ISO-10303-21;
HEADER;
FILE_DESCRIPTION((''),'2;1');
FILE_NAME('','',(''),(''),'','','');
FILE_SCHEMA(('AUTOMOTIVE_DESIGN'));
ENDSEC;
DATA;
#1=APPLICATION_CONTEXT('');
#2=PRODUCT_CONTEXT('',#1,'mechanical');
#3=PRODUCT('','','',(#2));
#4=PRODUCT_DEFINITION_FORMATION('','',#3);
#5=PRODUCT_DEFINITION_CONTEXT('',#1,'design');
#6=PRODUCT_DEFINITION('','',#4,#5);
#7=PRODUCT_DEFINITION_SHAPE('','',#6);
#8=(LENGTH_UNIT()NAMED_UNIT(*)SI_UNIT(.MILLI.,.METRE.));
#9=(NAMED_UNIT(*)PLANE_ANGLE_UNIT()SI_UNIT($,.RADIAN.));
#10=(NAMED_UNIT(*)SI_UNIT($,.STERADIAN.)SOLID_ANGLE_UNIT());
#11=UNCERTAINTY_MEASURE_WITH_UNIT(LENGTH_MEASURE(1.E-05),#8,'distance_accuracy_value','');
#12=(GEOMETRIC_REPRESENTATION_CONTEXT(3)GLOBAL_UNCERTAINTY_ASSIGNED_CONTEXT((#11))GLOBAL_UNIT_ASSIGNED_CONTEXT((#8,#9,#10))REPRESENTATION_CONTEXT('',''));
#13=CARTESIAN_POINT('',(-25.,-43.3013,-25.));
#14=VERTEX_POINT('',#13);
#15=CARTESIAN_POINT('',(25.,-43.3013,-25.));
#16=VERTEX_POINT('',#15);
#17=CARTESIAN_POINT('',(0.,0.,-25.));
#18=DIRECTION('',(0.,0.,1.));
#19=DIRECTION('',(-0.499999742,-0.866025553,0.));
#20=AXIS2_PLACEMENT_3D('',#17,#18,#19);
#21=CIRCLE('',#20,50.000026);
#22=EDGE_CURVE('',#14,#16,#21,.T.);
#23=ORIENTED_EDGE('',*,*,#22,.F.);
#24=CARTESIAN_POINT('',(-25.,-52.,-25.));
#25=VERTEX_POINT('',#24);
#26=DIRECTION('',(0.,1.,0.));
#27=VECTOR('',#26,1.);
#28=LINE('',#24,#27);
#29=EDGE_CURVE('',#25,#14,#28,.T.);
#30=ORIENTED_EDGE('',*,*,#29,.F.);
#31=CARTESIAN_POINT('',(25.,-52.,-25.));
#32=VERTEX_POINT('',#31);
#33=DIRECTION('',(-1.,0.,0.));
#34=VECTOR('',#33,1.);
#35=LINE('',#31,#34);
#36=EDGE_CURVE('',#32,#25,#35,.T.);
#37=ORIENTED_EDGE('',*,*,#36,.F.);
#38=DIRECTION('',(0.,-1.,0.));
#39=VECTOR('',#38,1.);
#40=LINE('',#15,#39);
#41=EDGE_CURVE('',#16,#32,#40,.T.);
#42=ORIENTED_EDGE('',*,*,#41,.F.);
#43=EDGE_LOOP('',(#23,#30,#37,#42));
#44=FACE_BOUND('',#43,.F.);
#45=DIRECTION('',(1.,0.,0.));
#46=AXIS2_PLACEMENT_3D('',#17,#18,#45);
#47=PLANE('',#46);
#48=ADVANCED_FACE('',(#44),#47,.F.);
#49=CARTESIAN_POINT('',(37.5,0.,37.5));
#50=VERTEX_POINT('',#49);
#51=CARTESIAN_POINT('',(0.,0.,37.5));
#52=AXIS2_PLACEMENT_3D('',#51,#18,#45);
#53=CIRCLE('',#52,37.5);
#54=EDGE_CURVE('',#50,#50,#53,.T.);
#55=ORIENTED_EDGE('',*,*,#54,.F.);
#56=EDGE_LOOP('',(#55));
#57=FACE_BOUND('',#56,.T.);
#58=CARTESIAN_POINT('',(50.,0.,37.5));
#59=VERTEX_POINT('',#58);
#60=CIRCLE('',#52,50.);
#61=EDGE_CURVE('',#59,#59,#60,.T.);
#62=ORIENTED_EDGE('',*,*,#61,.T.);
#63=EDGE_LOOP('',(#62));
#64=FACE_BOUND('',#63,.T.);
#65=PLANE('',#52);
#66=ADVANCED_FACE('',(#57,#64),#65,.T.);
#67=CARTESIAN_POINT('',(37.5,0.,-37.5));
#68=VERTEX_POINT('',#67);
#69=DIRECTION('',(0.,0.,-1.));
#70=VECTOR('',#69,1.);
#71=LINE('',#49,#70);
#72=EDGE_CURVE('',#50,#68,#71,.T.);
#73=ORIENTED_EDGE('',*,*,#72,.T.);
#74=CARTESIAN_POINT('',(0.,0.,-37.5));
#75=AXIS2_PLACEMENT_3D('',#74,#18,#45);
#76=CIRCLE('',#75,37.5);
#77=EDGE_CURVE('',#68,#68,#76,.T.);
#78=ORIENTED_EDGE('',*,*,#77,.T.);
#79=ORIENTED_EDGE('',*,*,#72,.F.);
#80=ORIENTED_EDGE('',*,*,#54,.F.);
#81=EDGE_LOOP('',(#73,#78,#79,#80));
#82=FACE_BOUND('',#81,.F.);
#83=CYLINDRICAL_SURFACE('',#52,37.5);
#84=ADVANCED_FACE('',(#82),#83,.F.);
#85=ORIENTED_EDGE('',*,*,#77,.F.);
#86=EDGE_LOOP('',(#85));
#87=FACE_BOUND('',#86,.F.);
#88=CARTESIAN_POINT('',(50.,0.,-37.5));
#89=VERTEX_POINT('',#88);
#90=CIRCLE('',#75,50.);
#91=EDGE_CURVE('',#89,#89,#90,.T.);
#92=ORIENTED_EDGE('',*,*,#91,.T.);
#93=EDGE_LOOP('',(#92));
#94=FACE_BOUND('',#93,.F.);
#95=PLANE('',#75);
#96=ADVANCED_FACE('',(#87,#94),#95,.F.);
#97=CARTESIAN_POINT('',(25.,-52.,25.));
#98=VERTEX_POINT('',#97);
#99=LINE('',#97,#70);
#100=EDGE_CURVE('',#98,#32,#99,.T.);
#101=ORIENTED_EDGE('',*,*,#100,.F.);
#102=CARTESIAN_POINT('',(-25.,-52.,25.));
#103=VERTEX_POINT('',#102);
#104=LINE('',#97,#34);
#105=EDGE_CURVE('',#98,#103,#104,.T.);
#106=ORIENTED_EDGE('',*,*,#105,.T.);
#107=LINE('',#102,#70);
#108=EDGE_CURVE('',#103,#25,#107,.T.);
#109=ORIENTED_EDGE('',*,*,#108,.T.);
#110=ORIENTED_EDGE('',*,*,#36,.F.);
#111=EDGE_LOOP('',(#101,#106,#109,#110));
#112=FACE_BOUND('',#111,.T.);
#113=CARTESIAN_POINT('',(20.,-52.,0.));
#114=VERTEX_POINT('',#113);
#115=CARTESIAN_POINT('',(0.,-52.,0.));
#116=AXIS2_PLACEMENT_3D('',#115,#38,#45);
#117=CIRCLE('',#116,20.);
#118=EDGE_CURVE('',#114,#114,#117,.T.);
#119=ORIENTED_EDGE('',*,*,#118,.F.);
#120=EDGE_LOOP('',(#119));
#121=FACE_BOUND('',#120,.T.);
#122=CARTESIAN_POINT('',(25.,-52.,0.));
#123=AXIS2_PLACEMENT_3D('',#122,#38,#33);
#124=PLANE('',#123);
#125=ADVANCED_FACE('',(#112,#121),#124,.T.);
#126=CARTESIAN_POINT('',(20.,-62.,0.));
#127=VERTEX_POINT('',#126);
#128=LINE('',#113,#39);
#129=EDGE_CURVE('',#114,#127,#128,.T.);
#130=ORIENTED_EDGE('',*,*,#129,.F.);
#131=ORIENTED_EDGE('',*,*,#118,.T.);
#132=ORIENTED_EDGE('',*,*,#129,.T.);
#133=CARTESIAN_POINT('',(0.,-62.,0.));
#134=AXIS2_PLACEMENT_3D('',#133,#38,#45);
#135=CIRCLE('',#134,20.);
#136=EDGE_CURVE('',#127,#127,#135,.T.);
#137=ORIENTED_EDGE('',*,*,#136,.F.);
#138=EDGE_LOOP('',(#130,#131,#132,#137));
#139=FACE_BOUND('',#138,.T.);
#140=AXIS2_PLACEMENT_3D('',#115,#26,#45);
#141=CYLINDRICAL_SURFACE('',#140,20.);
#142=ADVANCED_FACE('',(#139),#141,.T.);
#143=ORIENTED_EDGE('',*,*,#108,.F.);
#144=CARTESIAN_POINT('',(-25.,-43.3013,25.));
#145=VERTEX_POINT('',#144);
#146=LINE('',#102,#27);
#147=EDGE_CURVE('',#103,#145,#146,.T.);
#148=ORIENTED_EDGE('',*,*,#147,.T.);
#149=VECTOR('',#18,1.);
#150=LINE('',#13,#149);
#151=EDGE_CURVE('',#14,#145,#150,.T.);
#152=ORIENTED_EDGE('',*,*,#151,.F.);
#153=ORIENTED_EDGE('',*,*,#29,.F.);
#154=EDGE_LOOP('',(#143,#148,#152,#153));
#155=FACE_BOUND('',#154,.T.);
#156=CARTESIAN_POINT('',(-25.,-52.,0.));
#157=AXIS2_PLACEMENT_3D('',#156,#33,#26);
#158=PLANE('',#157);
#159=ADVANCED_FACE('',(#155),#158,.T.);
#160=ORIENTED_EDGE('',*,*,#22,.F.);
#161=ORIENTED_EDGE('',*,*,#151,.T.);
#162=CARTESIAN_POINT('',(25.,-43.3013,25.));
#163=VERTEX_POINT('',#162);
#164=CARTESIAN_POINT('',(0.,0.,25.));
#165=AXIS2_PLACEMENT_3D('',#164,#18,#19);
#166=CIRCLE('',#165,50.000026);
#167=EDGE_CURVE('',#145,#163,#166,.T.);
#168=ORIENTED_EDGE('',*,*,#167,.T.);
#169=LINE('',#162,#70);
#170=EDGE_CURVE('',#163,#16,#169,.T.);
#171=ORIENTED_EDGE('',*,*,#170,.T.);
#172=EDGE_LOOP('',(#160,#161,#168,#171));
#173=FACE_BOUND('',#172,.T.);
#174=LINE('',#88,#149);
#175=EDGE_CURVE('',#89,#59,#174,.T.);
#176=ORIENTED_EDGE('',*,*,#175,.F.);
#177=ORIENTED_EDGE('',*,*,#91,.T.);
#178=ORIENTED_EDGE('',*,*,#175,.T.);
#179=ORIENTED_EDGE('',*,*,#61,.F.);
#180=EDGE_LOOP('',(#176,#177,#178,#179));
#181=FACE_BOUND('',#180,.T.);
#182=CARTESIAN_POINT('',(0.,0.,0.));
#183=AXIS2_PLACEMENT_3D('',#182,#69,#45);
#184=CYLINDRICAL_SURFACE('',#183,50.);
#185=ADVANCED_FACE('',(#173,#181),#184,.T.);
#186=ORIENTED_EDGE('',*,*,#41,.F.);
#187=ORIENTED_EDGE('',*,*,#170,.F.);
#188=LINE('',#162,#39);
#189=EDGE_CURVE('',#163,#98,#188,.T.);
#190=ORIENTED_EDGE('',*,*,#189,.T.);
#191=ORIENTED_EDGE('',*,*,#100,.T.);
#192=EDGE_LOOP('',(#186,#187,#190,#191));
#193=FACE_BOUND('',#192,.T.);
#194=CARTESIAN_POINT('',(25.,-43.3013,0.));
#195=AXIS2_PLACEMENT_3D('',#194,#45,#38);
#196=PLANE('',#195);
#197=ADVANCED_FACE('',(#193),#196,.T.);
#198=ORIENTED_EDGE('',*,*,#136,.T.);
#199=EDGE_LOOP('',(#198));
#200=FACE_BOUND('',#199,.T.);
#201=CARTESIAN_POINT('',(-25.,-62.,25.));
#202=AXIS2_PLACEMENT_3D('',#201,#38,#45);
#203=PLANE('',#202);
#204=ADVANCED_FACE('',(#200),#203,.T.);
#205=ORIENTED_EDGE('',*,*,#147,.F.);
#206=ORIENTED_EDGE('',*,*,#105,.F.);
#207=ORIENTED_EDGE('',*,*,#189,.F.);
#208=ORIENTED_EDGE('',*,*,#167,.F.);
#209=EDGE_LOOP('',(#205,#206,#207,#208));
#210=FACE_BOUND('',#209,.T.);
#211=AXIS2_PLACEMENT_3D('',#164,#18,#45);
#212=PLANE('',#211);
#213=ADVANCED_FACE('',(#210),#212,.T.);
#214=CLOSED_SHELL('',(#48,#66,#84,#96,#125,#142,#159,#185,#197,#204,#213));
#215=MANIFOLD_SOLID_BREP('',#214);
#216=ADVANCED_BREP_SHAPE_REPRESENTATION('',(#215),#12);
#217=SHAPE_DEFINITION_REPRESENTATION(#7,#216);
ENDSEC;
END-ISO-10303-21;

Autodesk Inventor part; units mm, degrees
ref_plane "YZ Plane" through (0, 0, 0) normal (1, 0, 0) x (0, 1, 0)
ref_plane "XZ Plane" through (0, 0, 0) normal (0, 1, 0) x (-1, 0, 0)
ref_plane "XY Plane" through (0, 0, 0) normal (0, 0, 1) x (1, 0, 0)
sketch "Sketch1" plane through (0, 0, 0) normal (0, 0, 1) x (1, 0, 0)
  circle A0 centre (0, 0) radius 50
  dimension "d0" = 100
extrude "Extrusion1" add sketch "Sketch1" along normal mid plane 75
sketch "Sketch2" plane through (0, 0, 37.5) normal (0, 0, 1) x (1, 0, 0)
  circle A0 centre (0, 0) radius 37.5
  dimension "d3" = 75
extrude "Extrusion2" cut sketch "Sketch2" against normal through all
sketch "Sketch4" plane through (0, 0, 0) normal (0, 0, 1) x (1, 0, 0)
  line L0 (25, -43.3013) -> (25, -52)
  line L1 (25, -52) -> (-25, -52)
  line L2 (-25, -52) -> (-25, -43.3013)
  arc A0 (-25, -43.3013) -> (25, -43.3013) centre (0, 0) ccw
  circle A1 centre (0, 0) radius 50 projected
  line L3 (0, 0) -> (0, -66.2618) construction
  dimension "d22" = 50
  dimension "d24" = 90
  dimension "d25" = 50
  dimension "d26" = 52
extrude "Extrusion3" add sketch "Sketch4" along normal mid plane 50 contours L0 L1 L2 A0
sketch "Sketch6" plane through (-25, -52, 25) normal (0, -1, 0) x (1, 0, 0)
  circle A0 centre (25, -25) radius 20
  dimension "d27" = 40
extrude "Extrusion5" add sketch "Sketch6" along normal blind 10
properties material "ABS Plastic"
